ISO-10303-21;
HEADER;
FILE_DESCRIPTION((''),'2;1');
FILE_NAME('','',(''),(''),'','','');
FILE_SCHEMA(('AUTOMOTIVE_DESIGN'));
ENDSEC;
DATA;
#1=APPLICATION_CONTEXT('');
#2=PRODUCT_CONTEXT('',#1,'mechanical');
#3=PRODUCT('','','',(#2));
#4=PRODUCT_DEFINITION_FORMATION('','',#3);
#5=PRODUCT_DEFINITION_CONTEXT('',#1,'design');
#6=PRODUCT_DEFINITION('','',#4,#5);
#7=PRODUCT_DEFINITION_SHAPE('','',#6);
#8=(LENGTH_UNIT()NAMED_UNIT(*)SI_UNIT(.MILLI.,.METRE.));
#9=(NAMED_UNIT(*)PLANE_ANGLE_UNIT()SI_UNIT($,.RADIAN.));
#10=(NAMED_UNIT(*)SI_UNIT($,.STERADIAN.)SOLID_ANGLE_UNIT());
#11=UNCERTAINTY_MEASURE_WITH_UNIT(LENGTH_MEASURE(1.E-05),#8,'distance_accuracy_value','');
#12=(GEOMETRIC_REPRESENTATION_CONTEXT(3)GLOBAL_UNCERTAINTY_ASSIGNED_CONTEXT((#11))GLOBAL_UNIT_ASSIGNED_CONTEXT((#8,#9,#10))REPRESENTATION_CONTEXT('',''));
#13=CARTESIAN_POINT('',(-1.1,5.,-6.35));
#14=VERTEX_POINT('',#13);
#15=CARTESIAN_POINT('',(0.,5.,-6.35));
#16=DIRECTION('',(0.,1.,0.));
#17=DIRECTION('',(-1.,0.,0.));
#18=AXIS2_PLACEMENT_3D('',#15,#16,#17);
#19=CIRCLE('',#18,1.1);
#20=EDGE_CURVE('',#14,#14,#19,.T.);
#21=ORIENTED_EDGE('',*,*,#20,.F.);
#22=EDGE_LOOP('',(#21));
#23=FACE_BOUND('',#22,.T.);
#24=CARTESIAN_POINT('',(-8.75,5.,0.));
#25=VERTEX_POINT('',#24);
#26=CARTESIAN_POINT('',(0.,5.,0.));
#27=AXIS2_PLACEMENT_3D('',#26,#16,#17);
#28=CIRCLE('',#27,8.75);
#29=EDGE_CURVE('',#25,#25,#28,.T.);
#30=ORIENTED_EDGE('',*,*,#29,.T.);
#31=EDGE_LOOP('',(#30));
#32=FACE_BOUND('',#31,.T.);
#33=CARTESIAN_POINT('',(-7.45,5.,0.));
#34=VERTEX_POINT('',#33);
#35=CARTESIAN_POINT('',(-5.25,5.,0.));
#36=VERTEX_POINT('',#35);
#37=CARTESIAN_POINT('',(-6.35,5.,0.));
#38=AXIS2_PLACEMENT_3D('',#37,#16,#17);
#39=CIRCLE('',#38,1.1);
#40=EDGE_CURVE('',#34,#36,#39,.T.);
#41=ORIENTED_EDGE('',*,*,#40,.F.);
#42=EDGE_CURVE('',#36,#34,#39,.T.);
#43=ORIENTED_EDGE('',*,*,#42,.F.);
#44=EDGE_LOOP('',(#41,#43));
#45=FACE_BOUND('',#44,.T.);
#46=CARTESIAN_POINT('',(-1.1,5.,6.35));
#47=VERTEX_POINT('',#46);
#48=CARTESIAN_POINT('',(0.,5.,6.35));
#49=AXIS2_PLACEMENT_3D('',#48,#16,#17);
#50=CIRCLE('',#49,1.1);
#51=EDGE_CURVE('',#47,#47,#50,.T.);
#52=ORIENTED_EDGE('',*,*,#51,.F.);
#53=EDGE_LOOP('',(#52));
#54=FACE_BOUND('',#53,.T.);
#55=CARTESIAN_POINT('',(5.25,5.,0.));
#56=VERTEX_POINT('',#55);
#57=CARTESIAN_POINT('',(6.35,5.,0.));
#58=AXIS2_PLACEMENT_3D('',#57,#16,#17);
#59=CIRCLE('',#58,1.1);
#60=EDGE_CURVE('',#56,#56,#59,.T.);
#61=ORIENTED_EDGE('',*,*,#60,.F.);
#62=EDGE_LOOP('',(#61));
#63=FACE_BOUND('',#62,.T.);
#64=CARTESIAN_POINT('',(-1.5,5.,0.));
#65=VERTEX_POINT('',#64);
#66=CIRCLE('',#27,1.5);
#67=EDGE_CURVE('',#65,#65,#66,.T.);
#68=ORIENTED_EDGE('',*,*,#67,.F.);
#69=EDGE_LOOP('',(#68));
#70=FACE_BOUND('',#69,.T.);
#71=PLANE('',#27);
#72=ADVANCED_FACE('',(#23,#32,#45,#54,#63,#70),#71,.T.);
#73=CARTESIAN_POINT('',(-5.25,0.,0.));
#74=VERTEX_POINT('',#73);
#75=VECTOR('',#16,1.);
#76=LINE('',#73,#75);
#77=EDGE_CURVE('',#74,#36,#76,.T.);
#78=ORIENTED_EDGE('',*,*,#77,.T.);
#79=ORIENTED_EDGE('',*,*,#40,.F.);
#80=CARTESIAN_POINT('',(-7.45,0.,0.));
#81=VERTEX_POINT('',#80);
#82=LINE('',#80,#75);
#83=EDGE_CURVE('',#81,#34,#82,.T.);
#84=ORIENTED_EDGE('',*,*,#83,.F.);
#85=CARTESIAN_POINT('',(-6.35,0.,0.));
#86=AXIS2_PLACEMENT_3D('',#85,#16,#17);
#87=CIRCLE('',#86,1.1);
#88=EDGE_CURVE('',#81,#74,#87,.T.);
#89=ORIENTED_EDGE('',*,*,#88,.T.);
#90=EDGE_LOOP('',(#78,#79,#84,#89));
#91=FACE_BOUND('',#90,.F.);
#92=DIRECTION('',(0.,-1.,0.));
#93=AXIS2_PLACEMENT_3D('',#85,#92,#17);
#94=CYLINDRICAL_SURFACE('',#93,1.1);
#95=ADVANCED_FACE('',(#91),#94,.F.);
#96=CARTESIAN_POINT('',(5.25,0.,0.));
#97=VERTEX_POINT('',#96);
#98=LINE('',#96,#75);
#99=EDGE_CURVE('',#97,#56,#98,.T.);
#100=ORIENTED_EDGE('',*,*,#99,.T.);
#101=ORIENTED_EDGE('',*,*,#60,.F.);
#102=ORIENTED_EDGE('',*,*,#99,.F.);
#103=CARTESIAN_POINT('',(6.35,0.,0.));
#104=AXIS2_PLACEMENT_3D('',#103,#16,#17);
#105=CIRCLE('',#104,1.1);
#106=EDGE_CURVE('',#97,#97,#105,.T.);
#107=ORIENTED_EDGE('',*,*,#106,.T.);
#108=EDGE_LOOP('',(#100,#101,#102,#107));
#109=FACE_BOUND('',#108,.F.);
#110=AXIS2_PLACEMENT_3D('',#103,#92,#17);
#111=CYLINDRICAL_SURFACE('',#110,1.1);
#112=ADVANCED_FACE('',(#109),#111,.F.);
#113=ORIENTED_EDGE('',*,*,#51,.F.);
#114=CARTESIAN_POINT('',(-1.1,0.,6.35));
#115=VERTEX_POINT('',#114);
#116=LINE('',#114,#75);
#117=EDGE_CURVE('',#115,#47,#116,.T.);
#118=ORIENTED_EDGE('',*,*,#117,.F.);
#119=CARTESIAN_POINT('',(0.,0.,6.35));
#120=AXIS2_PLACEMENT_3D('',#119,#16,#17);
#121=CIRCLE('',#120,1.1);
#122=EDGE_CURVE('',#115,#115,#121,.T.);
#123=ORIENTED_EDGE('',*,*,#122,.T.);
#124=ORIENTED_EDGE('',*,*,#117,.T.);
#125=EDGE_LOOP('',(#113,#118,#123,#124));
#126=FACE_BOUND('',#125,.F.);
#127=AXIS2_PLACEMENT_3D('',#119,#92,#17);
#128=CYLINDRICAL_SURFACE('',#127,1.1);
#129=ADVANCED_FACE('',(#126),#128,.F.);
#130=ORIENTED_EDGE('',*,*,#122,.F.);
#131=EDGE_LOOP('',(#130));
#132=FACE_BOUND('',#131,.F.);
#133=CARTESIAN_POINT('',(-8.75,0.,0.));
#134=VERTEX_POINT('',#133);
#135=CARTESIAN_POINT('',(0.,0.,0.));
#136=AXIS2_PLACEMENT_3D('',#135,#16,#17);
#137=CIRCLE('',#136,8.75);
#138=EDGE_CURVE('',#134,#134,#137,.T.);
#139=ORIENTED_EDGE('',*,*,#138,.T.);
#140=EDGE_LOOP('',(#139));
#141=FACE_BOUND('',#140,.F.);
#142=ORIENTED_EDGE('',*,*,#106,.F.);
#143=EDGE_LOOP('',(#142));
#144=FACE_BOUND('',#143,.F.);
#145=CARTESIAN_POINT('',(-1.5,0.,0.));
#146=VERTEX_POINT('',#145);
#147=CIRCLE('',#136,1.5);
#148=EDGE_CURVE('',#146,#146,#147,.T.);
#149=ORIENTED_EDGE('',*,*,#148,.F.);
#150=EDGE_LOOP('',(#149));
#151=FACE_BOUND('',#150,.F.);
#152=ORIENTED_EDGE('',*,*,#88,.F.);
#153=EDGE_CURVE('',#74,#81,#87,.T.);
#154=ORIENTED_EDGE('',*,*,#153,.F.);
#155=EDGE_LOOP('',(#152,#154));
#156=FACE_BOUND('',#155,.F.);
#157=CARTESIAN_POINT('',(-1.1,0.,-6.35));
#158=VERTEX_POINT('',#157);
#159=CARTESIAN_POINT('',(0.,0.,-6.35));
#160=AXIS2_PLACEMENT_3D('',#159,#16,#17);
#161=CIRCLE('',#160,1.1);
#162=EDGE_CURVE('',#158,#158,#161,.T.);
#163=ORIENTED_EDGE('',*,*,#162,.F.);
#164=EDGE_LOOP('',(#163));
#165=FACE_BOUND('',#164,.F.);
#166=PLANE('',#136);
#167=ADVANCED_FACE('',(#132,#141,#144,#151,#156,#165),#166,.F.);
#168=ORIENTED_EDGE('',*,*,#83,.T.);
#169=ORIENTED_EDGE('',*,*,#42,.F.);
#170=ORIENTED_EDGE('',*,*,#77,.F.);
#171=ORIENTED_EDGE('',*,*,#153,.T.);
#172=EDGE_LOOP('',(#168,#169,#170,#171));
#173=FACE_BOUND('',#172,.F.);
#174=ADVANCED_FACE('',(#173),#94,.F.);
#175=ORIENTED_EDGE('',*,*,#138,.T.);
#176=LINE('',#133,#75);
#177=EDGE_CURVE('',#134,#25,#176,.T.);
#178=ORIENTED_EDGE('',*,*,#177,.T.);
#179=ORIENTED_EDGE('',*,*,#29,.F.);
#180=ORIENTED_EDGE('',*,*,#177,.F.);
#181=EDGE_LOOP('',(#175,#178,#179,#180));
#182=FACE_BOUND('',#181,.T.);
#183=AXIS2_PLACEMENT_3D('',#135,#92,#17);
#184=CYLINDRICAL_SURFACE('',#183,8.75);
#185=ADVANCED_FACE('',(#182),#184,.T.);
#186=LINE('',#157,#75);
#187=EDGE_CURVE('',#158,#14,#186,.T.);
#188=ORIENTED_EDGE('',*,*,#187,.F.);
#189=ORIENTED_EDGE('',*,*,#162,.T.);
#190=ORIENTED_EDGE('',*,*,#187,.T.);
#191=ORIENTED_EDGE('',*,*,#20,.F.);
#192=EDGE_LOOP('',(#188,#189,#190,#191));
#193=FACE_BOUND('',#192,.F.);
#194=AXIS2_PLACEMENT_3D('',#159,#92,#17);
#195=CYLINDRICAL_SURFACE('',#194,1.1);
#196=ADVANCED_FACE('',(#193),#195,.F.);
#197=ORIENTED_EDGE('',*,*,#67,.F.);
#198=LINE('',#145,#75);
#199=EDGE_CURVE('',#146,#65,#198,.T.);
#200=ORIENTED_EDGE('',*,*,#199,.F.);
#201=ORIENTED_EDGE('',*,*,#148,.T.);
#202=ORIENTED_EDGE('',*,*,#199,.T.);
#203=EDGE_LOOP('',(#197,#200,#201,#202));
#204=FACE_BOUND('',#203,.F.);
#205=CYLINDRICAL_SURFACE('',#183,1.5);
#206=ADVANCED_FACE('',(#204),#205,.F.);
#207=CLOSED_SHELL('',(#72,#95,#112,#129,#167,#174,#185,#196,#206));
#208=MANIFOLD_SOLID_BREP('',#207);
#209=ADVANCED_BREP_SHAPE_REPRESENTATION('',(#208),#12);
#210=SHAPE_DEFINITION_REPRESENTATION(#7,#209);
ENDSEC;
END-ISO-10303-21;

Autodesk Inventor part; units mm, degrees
ref_plane "YZ Plane" through (0, 0, 0) normal (1, 0, 0) x (0, 1, 0)
ref_plane "XZ Plane" through (0, 0, 0) normal (0, 1, 0) x (-1, 0, 0)
ref_plane "XY Plane" through (0, 0, 0) normal (0, 0, 1) x (1, 0, 0)
sketch "Sketch1" plane through (0, 0, 0) normal (0, 1, 0) x (-1, 0, 0)
  circle A0 centre (0, 0) radius 8.75
  circle A1 centre (0, 0) radius 1.5
  line L0 (0, 0) -> (6.35, 0)
  circle A2 centre (6.35, 0) radius 1.1
  circle A3 centre (0, 6.35) radius 1.1
  circle A4 centre (-6.35, 0) radius 1.1
  circle A5 centre (0, -6.35) radius 1.1
  dimension "d0" = 17.5
  dimension "d1" = 3
  dimension "d2" = 6.35
  dimension "d3" = 2.2
  dimension "d6" = 360
extrude "Extrusion1" add sketch "Sketch1" along normal blind 5
properties part number "Hub"
